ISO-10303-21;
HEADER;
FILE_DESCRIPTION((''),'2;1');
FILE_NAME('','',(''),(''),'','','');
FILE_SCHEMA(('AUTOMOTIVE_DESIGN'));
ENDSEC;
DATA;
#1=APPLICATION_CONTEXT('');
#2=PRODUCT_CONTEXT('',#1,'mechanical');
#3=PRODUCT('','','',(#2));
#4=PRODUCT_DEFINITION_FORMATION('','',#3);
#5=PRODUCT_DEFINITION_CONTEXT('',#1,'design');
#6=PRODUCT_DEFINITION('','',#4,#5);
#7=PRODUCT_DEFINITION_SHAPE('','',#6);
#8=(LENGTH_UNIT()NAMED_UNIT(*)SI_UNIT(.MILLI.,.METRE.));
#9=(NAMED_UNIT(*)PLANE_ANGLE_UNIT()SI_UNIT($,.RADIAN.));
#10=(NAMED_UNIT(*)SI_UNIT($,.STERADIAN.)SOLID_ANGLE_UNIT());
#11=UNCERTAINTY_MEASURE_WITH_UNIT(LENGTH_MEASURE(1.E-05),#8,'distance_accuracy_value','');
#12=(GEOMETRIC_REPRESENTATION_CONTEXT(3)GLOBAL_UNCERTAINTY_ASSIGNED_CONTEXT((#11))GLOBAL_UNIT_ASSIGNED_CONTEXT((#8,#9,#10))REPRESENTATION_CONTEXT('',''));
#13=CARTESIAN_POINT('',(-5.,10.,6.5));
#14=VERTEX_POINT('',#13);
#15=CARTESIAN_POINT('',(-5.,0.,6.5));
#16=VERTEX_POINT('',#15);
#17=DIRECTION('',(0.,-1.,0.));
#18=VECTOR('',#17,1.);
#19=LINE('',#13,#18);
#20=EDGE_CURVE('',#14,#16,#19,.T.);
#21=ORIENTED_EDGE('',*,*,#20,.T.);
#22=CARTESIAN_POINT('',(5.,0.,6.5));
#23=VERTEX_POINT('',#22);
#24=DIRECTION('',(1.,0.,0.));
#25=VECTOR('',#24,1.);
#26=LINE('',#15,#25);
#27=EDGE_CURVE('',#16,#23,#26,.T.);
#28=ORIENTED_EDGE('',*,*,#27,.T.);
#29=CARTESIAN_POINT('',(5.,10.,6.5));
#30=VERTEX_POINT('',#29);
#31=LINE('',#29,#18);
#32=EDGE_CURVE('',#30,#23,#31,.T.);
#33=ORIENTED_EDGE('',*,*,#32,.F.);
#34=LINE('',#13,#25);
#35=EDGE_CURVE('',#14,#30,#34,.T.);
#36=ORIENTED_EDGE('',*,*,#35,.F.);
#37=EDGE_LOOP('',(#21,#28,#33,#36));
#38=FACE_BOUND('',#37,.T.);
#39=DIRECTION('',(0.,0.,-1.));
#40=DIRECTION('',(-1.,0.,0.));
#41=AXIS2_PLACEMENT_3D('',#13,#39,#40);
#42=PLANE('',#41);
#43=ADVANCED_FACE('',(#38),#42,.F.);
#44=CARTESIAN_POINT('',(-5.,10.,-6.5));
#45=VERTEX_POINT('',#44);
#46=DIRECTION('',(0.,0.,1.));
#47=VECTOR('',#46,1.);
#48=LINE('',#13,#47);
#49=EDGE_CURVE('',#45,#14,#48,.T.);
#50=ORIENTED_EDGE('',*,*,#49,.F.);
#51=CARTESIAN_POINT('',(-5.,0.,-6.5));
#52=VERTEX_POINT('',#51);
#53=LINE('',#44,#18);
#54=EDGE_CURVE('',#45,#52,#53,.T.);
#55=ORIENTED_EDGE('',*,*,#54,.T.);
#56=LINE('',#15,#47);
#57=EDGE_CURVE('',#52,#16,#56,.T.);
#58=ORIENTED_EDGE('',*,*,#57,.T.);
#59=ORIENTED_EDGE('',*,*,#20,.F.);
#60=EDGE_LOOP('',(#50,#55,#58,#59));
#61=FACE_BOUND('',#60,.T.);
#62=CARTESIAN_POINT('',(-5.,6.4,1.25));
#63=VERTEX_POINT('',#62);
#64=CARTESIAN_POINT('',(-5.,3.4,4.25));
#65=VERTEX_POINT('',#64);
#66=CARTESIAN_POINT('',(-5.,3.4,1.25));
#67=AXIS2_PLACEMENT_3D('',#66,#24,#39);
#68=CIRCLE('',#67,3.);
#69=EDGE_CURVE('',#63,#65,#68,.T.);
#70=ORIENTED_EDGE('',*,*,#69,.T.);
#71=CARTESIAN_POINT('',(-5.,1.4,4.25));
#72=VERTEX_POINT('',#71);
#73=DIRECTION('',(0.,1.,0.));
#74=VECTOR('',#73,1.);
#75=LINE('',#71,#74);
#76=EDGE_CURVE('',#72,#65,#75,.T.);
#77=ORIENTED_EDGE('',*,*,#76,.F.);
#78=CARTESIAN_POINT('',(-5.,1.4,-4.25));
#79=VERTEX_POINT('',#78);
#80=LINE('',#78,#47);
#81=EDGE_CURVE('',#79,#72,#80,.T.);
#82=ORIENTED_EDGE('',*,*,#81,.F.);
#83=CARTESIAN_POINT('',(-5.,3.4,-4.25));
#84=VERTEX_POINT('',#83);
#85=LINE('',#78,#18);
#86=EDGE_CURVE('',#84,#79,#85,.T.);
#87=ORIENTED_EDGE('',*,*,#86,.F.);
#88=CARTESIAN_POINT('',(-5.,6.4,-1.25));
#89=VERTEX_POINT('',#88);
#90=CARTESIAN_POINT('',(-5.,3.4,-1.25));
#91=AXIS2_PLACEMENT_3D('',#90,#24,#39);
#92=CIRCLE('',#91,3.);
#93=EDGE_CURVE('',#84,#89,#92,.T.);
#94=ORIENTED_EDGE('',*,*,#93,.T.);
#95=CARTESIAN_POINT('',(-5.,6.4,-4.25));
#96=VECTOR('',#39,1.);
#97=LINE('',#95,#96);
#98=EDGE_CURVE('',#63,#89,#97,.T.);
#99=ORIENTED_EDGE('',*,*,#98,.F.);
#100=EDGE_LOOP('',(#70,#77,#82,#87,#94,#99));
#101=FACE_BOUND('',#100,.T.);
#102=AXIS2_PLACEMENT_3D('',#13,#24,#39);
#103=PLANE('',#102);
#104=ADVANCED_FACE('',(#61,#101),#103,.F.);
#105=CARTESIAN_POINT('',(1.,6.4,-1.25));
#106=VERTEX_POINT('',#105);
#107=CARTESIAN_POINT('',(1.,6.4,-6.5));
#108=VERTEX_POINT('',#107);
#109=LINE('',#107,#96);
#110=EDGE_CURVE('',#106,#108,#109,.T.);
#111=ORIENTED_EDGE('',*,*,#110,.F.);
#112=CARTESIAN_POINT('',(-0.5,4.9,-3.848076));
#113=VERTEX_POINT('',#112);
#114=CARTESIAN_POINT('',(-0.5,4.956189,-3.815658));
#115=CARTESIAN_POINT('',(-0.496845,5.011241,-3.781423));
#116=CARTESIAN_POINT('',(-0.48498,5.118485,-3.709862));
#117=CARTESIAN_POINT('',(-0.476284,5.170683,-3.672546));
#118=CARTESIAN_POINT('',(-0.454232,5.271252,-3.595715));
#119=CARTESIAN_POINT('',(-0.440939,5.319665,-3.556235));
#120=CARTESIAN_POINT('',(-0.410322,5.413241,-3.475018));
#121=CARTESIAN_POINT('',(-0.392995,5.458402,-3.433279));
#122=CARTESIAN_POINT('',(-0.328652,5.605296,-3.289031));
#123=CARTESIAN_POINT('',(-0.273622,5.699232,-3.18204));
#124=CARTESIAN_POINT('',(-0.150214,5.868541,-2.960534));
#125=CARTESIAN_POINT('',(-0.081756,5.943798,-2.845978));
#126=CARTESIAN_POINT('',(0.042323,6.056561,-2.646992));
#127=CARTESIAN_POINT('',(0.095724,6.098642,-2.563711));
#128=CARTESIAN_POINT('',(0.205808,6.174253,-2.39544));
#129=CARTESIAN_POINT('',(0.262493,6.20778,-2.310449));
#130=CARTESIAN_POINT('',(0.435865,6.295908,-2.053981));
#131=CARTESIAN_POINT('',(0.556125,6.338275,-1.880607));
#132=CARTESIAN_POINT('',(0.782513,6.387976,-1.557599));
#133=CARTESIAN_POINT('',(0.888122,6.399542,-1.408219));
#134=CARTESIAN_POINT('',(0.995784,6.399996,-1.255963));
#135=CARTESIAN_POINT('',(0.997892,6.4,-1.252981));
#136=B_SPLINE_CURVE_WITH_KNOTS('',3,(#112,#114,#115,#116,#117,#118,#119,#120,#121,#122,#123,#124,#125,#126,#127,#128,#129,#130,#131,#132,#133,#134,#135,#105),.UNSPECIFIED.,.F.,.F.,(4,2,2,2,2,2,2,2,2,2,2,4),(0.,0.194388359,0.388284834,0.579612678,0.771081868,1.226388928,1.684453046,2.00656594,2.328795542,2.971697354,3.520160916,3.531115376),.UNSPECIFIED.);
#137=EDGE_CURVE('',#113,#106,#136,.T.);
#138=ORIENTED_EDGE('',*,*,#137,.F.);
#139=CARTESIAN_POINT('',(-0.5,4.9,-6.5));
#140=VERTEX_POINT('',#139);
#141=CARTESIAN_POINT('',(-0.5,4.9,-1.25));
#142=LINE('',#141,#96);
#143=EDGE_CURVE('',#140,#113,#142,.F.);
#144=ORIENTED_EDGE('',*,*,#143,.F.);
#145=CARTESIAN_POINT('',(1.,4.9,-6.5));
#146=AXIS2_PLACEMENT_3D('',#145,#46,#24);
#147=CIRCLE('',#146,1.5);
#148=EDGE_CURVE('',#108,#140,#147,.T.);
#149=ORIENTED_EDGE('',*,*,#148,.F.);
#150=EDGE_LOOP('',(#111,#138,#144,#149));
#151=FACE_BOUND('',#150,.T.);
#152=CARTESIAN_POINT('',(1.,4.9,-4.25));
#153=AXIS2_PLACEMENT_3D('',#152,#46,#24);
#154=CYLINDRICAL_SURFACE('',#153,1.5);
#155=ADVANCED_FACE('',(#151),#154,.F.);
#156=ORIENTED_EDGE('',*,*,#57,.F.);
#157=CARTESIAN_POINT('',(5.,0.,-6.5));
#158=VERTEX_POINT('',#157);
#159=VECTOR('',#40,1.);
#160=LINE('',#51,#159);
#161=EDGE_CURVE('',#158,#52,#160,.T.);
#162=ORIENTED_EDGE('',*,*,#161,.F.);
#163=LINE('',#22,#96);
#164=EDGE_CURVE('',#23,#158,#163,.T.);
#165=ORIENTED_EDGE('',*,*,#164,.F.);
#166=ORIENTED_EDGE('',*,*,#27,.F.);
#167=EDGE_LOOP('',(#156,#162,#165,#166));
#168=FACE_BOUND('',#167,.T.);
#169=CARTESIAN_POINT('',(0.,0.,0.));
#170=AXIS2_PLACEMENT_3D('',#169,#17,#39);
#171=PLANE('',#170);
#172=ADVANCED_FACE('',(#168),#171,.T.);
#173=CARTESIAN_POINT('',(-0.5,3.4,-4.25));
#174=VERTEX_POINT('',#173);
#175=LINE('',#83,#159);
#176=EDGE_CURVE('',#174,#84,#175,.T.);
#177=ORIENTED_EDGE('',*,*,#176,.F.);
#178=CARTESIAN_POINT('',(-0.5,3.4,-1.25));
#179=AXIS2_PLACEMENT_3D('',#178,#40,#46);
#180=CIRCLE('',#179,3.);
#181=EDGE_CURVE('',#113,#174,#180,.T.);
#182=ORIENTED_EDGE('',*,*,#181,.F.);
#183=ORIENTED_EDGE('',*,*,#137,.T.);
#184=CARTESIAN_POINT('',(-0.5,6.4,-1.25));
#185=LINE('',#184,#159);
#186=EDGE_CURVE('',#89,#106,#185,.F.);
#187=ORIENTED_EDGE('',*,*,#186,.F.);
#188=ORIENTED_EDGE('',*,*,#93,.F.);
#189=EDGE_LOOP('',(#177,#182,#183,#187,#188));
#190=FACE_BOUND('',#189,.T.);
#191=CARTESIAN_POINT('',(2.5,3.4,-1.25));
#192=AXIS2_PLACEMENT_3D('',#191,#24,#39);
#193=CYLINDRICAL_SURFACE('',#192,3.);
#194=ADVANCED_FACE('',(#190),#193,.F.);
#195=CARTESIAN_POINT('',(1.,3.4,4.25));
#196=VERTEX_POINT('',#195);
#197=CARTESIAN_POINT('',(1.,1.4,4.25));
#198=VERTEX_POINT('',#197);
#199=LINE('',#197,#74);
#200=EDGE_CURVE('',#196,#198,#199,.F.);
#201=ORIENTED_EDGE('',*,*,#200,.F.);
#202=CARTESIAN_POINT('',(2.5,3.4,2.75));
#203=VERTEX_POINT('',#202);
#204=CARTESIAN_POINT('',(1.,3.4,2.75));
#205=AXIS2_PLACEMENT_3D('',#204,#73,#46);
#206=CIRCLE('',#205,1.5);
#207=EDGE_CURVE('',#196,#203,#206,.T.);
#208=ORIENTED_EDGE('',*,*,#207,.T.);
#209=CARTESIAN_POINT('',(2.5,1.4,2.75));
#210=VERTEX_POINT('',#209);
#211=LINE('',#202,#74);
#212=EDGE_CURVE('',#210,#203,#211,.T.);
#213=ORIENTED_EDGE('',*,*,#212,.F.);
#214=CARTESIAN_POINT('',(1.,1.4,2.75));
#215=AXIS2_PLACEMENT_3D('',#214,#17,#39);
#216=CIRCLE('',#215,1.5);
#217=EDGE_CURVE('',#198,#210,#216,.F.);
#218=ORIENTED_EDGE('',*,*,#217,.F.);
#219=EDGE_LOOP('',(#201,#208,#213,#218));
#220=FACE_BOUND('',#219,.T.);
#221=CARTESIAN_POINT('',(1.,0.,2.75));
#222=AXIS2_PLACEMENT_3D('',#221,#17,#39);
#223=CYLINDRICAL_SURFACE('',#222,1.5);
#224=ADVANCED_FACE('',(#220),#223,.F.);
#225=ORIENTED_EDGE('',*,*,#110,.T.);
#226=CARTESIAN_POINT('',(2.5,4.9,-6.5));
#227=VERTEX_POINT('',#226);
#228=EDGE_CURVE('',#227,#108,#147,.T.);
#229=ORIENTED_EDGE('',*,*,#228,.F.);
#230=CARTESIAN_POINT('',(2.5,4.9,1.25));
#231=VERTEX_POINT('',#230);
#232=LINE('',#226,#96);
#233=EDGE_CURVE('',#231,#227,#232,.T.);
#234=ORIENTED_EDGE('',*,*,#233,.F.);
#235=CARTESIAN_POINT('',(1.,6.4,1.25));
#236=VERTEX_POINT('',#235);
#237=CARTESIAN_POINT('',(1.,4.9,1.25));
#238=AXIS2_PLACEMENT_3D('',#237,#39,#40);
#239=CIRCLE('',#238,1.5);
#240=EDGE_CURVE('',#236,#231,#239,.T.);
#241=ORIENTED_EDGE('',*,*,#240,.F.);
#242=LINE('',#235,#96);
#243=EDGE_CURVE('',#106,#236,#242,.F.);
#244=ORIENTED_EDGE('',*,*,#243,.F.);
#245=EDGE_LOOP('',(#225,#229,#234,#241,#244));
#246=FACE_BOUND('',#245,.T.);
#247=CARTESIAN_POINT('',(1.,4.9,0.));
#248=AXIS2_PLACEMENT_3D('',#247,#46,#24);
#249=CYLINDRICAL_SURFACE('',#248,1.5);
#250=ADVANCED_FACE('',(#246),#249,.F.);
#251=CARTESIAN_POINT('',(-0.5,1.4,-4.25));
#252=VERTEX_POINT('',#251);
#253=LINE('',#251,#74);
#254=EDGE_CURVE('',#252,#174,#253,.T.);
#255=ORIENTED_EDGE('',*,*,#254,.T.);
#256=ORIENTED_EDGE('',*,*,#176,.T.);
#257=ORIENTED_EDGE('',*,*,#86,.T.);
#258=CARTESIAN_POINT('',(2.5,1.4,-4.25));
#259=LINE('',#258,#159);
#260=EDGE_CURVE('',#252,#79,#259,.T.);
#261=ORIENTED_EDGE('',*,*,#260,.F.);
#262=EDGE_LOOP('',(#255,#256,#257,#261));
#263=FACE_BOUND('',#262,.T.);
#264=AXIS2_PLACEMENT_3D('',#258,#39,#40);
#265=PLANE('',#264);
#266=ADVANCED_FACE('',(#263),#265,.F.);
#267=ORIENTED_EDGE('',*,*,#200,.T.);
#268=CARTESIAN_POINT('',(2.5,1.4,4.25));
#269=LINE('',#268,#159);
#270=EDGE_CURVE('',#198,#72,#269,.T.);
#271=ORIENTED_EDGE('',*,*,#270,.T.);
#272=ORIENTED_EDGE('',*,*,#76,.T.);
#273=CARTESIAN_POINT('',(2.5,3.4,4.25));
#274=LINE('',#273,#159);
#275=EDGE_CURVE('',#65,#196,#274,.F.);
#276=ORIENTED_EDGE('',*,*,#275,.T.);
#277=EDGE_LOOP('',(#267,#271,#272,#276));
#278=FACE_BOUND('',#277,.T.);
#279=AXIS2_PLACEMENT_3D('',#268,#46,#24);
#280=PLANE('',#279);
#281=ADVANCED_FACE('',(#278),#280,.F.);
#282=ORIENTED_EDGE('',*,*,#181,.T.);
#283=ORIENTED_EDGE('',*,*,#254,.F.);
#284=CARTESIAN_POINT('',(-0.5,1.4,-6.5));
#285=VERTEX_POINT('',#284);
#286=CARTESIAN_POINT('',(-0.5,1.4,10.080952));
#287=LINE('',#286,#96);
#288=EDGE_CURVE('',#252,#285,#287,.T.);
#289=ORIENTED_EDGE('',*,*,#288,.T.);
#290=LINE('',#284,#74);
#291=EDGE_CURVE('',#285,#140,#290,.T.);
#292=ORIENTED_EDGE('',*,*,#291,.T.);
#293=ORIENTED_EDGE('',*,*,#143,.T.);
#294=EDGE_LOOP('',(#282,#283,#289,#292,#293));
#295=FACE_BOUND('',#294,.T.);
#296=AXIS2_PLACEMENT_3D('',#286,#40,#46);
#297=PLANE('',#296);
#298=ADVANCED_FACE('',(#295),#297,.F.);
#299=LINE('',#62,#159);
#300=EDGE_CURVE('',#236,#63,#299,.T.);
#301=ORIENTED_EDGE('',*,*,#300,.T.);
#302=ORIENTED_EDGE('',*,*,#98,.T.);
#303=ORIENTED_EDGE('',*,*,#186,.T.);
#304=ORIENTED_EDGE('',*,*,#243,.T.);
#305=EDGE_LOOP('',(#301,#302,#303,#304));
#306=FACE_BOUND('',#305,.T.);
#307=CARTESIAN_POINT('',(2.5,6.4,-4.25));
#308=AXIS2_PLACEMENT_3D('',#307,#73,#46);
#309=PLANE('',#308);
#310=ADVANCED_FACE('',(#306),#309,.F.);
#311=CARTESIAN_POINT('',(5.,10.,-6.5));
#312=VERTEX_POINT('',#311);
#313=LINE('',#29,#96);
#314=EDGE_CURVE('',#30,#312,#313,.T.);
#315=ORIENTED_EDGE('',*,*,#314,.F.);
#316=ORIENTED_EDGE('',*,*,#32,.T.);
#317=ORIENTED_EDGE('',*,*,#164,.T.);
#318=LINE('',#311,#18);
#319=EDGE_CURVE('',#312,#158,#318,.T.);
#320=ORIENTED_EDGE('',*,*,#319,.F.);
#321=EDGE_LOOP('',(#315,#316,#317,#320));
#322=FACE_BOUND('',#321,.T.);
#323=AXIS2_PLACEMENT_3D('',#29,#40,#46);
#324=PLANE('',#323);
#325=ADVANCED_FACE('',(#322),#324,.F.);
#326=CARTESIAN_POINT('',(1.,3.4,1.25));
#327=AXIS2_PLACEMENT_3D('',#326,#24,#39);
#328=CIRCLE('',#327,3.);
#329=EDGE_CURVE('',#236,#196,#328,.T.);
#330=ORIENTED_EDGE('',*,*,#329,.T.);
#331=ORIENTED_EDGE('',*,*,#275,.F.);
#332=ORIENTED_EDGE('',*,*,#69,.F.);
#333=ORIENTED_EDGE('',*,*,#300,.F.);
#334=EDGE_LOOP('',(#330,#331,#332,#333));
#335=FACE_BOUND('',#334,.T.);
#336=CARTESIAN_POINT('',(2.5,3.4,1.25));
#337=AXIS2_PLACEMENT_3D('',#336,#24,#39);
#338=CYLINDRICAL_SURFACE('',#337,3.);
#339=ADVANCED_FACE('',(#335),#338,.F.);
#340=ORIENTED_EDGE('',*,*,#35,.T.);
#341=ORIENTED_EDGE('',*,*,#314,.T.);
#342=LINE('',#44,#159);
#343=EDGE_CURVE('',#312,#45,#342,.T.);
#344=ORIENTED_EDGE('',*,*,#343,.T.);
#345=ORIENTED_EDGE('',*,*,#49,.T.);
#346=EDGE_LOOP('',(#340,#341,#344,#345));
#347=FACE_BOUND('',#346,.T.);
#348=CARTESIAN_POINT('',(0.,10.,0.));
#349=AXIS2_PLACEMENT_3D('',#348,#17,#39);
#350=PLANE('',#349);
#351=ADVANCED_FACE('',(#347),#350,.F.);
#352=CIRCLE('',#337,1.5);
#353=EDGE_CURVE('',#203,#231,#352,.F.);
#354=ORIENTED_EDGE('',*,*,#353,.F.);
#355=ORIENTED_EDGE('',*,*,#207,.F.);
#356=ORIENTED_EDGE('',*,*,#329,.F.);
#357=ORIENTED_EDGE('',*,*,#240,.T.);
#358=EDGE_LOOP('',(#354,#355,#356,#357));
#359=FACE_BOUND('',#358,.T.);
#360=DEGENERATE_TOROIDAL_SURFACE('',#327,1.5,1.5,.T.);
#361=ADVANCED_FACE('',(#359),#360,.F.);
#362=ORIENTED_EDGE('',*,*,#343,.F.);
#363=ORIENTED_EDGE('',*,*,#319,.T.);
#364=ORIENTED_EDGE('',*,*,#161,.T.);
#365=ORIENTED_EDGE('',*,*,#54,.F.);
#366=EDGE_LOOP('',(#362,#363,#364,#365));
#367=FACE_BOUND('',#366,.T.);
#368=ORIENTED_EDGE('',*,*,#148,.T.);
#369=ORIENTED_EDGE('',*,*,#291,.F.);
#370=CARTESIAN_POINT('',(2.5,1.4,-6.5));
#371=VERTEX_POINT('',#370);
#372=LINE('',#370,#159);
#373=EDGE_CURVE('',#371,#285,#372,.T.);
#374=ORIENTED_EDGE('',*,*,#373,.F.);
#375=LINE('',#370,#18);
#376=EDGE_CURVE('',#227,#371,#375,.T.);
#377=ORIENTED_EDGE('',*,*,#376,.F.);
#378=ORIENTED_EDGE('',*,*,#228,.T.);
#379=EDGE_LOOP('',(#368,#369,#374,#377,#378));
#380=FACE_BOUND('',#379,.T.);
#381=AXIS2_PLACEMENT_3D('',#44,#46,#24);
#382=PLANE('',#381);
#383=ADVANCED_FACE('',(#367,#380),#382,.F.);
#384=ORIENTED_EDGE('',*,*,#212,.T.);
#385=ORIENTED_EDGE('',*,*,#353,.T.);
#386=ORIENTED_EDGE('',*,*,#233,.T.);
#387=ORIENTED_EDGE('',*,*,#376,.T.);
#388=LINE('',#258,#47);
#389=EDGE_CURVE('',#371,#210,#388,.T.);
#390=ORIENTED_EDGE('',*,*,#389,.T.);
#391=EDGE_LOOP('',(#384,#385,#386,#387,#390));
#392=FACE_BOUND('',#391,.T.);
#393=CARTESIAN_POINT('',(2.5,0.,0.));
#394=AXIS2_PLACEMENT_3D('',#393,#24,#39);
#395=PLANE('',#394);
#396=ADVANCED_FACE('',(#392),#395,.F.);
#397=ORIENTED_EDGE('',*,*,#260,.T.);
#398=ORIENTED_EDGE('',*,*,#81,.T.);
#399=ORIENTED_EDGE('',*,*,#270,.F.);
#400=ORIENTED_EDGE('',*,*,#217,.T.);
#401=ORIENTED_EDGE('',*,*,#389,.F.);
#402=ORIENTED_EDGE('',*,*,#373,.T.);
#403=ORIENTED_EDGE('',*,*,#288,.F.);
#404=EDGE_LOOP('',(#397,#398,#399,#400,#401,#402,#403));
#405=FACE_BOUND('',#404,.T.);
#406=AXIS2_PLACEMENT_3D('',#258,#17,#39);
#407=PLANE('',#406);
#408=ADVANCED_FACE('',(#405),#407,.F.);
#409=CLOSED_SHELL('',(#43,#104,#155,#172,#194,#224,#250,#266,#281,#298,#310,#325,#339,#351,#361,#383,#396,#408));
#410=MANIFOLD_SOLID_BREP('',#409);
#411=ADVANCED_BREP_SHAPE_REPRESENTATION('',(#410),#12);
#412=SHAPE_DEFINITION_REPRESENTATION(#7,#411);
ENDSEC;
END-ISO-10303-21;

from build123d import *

# Parameters (mm, degrees)
SKETCH1_W           = 10
SKETCH1_H           = 13
BOSS_EXTRUDE1_DEPTH = 10
SKETCH2_W           = 8.5
SKETCH2_H           = 5
CUT_EXTRUDE1_DEPTH  = 7.5
SKETCH3_W           = 3
SKETCH3_H           = 5
CUT_EXTRUDE3_DEPTH  = 10.75
FILLET3_R           = 3
FILLET5_R           = 1.5


with BuildPart() as part:
    # Sketch1 → Boss-Extrude1 (new body)
    with BuildSketch(Plane(origin=(0, 0, 0), x_dir=(1, 0, 0), z_dir=(0, 1, 0))):
        Rectangle(SKETCH1_W, SKETCH1_H)
    extrude(amount=BOSS_EXTRUDE1_DEPTH)

    # Sketch2 → Cut-Extrude1 (cut)
    with BuildSketch(Plane.ZY.offset(5)):
        with Locations((0, 3.9)):
            Rectangle(SKETCH2_W, SKETCH2_H)
    extrude(amount=-CUT_EXTRUDE1_DEPTH, mode=Mode.SUBTRACT)

    # Sketch3 → Cut-Extrude3 (cut)
    with BuildSketch(Plane(origin=(0, 0, -6.5), x_dir=(-1, 0, 0), z_dir=(0, 0, -1))):
        with Locations((-1, 3.9)):
            Rectangle(SKETCH3_W, SKETCH3_H)
    extrude(amount=-CUT_EXTRUDE3_DEPTH, mode=Mode.SUBTRACT)

    # Fillet3
    fillet3_edges = [part.edges().sort_by_distance(p)[0] for p in [
        (-1.25, 6.4, 4.25),
        (-2.75, 6.4, -4.25),
    ]]
    fillet(fillet3_edges, radius=FILLET3_R)

    # Fillet5
    fillet5_edges = [part.edges().sort_by_distance(p)[0] for p in [
        (2.5, 2.4, 4.25),
        (2.5, 5.521320344, 3.371320344),
        (2.5, 6.4, -2.625),
        (-0.5, 6.4, -3.875),
    ]]
    fillet(fillet5_edges, radius=FILLET5_R - 0.0001)  # a hair under: the kernel refuses the full size


solid = part.part
